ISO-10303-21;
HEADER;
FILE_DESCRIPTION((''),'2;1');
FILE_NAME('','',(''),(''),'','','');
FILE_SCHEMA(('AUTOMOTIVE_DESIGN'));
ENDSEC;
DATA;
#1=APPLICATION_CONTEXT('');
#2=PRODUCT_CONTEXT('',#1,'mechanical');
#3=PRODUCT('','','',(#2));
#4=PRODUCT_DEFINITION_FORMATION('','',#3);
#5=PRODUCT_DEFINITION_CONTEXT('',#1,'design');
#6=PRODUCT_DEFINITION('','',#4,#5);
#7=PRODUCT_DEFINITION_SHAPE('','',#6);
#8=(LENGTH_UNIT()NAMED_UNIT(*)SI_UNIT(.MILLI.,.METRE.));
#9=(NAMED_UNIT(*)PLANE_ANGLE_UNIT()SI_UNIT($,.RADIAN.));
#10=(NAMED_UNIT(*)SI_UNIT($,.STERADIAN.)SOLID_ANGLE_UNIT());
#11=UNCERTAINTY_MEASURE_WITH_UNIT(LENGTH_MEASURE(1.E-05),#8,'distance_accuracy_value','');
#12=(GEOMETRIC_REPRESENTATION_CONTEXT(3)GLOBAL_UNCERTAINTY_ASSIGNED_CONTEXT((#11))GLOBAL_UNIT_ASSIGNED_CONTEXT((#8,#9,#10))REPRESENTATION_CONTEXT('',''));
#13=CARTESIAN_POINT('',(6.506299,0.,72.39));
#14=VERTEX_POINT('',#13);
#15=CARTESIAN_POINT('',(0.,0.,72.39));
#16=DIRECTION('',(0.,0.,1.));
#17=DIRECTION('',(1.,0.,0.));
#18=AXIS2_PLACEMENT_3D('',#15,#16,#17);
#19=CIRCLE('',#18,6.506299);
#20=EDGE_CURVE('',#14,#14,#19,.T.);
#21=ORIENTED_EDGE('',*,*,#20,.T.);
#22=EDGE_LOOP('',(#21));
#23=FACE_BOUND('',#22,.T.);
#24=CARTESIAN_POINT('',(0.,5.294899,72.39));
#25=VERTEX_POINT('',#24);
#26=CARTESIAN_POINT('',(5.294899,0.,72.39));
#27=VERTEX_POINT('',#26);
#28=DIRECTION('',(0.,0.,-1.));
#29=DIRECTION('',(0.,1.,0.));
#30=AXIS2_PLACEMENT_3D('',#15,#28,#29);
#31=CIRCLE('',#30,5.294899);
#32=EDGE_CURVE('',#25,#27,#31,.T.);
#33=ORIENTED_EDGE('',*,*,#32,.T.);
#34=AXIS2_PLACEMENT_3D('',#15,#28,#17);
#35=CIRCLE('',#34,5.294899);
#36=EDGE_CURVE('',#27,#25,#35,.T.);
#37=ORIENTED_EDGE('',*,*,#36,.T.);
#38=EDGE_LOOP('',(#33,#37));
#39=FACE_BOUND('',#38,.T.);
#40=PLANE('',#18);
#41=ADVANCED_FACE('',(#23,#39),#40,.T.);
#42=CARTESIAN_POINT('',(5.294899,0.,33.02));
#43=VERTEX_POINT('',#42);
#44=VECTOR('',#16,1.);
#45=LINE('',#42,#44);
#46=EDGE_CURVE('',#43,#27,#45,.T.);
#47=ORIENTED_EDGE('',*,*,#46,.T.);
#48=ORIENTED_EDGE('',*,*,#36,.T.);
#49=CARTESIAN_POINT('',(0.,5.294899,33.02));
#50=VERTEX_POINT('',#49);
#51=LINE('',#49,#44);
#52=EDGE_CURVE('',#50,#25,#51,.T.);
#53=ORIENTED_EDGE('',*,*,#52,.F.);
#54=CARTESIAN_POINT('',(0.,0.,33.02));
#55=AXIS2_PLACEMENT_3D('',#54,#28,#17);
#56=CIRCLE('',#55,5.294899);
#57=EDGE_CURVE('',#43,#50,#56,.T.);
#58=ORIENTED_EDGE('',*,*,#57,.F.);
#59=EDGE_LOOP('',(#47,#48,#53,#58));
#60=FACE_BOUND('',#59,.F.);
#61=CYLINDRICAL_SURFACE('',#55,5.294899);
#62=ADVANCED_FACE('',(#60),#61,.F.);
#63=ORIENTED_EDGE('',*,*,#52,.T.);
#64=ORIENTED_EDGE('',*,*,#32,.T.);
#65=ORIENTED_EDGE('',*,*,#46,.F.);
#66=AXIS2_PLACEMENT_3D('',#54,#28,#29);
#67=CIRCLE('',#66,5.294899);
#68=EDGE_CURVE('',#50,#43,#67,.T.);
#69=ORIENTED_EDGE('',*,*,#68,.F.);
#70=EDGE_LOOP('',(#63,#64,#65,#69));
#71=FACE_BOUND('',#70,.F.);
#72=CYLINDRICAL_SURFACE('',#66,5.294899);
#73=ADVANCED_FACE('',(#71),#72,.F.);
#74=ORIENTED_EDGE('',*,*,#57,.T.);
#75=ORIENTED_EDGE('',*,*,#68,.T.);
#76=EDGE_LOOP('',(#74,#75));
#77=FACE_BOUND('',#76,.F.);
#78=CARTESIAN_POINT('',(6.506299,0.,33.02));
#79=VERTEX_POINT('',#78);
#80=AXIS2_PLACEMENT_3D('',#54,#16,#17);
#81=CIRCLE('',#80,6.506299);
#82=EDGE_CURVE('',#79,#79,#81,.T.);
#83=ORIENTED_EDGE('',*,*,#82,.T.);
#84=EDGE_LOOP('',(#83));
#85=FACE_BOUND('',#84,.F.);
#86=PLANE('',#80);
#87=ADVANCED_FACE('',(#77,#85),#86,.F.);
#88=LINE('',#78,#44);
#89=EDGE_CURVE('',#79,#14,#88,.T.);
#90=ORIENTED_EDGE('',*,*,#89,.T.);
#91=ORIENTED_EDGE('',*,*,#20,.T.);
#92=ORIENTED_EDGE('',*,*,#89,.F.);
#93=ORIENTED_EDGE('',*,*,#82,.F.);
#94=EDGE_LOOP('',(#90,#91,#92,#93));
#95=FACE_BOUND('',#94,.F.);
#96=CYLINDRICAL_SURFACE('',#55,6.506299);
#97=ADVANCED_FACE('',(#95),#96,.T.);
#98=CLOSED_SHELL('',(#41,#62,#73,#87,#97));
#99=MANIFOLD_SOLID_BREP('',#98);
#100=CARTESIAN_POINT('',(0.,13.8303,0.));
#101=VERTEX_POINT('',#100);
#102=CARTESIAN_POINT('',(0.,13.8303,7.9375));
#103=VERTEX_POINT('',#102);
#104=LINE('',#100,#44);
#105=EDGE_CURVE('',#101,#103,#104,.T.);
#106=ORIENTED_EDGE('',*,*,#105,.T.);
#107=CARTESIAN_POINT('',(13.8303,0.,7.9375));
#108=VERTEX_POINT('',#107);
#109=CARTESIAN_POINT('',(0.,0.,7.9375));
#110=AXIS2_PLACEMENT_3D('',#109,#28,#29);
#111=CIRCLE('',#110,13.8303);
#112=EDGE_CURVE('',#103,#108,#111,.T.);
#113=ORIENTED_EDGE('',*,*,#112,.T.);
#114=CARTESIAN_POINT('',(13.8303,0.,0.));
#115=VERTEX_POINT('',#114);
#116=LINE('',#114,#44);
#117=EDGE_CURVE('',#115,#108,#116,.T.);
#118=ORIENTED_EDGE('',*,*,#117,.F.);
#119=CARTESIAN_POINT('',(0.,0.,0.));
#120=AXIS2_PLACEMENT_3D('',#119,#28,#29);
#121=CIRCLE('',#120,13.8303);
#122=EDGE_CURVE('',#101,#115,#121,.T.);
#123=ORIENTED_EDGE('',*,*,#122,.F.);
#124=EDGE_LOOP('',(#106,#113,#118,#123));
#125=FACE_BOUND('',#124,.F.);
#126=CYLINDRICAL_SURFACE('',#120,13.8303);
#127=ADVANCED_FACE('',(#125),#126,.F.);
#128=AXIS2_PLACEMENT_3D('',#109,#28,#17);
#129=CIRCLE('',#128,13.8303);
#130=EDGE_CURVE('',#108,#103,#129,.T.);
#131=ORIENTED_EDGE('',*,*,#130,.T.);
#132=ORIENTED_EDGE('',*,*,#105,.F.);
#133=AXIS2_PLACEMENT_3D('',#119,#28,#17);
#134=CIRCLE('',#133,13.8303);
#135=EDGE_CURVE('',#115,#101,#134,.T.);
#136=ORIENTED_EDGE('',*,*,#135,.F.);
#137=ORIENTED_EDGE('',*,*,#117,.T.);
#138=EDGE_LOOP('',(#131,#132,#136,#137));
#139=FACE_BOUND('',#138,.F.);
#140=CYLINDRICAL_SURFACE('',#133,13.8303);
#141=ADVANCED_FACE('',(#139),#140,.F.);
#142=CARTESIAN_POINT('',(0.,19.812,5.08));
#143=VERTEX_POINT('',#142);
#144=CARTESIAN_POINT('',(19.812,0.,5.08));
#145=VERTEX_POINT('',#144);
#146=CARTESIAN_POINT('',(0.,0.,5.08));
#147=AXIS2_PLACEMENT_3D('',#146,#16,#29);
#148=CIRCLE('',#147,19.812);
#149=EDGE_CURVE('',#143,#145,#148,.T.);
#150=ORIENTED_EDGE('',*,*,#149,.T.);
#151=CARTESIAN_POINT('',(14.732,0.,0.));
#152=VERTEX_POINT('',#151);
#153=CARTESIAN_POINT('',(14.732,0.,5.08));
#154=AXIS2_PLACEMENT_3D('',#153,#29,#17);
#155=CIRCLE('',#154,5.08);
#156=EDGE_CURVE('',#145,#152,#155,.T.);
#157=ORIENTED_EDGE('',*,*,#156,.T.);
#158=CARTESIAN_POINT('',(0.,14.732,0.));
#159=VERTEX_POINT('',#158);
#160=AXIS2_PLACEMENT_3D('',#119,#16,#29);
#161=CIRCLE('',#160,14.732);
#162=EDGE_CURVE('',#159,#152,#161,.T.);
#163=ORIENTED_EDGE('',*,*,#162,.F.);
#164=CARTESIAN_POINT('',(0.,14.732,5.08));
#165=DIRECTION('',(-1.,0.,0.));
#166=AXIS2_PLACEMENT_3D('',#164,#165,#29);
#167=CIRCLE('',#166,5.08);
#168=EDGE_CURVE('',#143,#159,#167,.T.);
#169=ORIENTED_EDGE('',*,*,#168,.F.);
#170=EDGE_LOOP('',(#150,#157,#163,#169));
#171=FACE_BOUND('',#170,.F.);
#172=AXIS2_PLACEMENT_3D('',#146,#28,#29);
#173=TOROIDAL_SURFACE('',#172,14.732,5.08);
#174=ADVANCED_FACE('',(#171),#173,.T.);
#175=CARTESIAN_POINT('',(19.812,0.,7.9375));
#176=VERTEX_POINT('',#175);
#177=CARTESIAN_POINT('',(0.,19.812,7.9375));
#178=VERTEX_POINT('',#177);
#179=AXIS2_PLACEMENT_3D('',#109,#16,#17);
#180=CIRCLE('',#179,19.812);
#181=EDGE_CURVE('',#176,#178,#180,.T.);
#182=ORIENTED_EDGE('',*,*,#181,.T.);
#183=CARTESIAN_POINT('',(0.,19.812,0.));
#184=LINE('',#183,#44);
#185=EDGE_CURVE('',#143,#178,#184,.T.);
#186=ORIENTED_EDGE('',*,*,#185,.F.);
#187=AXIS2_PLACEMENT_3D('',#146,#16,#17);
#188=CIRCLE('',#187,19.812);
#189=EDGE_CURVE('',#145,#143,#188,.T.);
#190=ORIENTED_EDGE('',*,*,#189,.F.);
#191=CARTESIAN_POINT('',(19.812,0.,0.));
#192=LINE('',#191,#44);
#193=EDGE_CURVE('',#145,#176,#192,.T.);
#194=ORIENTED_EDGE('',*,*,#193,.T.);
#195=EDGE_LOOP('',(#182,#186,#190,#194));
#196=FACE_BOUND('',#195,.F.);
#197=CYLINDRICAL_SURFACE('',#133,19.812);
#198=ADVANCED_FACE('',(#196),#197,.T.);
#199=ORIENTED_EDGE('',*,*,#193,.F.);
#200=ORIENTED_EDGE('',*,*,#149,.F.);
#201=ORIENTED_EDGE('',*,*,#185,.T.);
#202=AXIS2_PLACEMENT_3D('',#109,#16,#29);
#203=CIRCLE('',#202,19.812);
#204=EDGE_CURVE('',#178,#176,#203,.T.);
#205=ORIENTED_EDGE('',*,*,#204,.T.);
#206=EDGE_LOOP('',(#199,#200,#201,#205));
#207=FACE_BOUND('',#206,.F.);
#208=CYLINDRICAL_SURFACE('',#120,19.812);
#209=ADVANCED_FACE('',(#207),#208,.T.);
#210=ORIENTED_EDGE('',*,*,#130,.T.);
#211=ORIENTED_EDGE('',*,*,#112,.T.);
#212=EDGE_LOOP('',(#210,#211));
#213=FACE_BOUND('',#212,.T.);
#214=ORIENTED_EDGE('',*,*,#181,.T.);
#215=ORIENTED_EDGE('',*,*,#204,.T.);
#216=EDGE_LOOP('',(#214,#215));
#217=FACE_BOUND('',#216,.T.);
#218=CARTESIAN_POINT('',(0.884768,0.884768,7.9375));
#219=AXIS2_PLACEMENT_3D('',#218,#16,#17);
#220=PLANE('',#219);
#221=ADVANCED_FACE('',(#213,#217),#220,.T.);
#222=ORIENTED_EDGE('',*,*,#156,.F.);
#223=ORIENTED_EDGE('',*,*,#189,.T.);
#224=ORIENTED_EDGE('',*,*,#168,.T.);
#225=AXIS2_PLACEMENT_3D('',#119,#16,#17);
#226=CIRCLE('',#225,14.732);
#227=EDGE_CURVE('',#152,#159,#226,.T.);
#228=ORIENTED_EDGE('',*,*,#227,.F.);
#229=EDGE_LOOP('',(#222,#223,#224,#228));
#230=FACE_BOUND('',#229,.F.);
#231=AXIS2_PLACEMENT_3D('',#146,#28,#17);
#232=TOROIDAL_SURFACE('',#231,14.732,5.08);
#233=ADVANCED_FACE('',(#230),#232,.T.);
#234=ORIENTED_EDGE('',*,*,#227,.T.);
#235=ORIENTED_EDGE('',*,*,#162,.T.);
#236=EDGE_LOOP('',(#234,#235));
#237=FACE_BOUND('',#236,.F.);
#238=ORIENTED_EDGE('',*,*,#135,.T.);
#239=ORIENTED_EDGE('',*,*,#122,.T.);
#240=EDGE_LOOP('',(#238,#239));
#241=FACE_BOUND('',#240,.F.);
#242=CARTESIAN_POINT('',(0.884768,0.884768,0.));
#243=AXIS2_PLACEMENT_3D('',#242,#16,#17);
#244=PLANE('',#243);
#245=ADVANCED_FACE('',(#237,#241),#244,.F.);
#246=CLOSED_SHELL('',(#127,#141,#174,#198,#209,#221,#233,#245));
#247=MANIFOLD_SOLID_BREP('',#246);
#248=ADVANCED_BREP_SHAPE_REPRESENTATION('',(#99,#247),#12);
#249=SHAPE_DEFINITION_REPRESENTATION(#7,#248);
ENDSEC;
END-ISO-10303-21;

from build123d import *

# Parameters (mm, degrees)
F1_DEPTH = 7.9375
F3_R     = 6.5062989
F4_DEPTH = 39.37
F5_DEPTH = 25.4
F6_R     = 5.08


# Not quite as in the source:
# - the program builds the solid bodies; features that only make, move or delete a surface that nothing else refers to are left out


with BuildPart() as f1:
    # F0 (on Top) → F1 (new body)
    with BuildSketch(Plane.XY):
        with BuildLine():
            ThreePointArc((19.812, 0), (14.0091995489, 14.0091995489), (0, 19.812))
            ThreePointArc((0, 19.812), (-14.0091995489, -14.0091995489), (19.812, 0))
        make_face()
        with BuildLine():
            ThreePointArc((0, 13.8303), (9.7794989158, 9.7794989158), (13.8303, 0))
            ThreePointArc((13.8303, 0), (-9.7794989158, -9.7794989158), (0, 13.8303))
        make_face(mode=Mode.SUBTRACT)
    extrude(amount=F1_DEPTH)

    # F3 (on offset) → F5 (cut)
    with BuildSketch(Plane.XY.offset(33.02)):
        Circle(F3_R)
        with BuildLine():
            ThreePointArc((0, 5.294899345), (3.7440592325, 3.7440592325), (5.294899345, 0))
            ThreePointArc((5.294899345, 0), (-3.7440592325, -3.7440592325), (0, 5.294899345))
        make_face(mode=Mode.SUBTRACT)
    extrude(amount=-F5_DEPTH, mode=Mode.SUBTRACT)

    # F6
    f6_edges = [f1.edges().sort_by_distance(p)[0] for p in [
        (-19.812, 0, 0),
    ]]
    fillet(f6_edges, radius=F6_R)


with BuildPart() as f4:
    # F3 (on offset) → F4 (new body)
    with BuildSketch(Plane.XY.offset(33.02)):
        Circle(F3_R)
        with BuildLine():
            ThreePointArc((0, 5.294899345), (3.7440592325, 3.7440592325), (5.294899345, 0))
            ThreePointArc((5.294899345, 0), (-3.7440592325, -3.7440592325), (0, 5.294899345))
        make_face(mode=Mode.SUBTRACT)
    extrude(amount=F4_DEPTH)


solid = Compound([f1.part, f4.part])
